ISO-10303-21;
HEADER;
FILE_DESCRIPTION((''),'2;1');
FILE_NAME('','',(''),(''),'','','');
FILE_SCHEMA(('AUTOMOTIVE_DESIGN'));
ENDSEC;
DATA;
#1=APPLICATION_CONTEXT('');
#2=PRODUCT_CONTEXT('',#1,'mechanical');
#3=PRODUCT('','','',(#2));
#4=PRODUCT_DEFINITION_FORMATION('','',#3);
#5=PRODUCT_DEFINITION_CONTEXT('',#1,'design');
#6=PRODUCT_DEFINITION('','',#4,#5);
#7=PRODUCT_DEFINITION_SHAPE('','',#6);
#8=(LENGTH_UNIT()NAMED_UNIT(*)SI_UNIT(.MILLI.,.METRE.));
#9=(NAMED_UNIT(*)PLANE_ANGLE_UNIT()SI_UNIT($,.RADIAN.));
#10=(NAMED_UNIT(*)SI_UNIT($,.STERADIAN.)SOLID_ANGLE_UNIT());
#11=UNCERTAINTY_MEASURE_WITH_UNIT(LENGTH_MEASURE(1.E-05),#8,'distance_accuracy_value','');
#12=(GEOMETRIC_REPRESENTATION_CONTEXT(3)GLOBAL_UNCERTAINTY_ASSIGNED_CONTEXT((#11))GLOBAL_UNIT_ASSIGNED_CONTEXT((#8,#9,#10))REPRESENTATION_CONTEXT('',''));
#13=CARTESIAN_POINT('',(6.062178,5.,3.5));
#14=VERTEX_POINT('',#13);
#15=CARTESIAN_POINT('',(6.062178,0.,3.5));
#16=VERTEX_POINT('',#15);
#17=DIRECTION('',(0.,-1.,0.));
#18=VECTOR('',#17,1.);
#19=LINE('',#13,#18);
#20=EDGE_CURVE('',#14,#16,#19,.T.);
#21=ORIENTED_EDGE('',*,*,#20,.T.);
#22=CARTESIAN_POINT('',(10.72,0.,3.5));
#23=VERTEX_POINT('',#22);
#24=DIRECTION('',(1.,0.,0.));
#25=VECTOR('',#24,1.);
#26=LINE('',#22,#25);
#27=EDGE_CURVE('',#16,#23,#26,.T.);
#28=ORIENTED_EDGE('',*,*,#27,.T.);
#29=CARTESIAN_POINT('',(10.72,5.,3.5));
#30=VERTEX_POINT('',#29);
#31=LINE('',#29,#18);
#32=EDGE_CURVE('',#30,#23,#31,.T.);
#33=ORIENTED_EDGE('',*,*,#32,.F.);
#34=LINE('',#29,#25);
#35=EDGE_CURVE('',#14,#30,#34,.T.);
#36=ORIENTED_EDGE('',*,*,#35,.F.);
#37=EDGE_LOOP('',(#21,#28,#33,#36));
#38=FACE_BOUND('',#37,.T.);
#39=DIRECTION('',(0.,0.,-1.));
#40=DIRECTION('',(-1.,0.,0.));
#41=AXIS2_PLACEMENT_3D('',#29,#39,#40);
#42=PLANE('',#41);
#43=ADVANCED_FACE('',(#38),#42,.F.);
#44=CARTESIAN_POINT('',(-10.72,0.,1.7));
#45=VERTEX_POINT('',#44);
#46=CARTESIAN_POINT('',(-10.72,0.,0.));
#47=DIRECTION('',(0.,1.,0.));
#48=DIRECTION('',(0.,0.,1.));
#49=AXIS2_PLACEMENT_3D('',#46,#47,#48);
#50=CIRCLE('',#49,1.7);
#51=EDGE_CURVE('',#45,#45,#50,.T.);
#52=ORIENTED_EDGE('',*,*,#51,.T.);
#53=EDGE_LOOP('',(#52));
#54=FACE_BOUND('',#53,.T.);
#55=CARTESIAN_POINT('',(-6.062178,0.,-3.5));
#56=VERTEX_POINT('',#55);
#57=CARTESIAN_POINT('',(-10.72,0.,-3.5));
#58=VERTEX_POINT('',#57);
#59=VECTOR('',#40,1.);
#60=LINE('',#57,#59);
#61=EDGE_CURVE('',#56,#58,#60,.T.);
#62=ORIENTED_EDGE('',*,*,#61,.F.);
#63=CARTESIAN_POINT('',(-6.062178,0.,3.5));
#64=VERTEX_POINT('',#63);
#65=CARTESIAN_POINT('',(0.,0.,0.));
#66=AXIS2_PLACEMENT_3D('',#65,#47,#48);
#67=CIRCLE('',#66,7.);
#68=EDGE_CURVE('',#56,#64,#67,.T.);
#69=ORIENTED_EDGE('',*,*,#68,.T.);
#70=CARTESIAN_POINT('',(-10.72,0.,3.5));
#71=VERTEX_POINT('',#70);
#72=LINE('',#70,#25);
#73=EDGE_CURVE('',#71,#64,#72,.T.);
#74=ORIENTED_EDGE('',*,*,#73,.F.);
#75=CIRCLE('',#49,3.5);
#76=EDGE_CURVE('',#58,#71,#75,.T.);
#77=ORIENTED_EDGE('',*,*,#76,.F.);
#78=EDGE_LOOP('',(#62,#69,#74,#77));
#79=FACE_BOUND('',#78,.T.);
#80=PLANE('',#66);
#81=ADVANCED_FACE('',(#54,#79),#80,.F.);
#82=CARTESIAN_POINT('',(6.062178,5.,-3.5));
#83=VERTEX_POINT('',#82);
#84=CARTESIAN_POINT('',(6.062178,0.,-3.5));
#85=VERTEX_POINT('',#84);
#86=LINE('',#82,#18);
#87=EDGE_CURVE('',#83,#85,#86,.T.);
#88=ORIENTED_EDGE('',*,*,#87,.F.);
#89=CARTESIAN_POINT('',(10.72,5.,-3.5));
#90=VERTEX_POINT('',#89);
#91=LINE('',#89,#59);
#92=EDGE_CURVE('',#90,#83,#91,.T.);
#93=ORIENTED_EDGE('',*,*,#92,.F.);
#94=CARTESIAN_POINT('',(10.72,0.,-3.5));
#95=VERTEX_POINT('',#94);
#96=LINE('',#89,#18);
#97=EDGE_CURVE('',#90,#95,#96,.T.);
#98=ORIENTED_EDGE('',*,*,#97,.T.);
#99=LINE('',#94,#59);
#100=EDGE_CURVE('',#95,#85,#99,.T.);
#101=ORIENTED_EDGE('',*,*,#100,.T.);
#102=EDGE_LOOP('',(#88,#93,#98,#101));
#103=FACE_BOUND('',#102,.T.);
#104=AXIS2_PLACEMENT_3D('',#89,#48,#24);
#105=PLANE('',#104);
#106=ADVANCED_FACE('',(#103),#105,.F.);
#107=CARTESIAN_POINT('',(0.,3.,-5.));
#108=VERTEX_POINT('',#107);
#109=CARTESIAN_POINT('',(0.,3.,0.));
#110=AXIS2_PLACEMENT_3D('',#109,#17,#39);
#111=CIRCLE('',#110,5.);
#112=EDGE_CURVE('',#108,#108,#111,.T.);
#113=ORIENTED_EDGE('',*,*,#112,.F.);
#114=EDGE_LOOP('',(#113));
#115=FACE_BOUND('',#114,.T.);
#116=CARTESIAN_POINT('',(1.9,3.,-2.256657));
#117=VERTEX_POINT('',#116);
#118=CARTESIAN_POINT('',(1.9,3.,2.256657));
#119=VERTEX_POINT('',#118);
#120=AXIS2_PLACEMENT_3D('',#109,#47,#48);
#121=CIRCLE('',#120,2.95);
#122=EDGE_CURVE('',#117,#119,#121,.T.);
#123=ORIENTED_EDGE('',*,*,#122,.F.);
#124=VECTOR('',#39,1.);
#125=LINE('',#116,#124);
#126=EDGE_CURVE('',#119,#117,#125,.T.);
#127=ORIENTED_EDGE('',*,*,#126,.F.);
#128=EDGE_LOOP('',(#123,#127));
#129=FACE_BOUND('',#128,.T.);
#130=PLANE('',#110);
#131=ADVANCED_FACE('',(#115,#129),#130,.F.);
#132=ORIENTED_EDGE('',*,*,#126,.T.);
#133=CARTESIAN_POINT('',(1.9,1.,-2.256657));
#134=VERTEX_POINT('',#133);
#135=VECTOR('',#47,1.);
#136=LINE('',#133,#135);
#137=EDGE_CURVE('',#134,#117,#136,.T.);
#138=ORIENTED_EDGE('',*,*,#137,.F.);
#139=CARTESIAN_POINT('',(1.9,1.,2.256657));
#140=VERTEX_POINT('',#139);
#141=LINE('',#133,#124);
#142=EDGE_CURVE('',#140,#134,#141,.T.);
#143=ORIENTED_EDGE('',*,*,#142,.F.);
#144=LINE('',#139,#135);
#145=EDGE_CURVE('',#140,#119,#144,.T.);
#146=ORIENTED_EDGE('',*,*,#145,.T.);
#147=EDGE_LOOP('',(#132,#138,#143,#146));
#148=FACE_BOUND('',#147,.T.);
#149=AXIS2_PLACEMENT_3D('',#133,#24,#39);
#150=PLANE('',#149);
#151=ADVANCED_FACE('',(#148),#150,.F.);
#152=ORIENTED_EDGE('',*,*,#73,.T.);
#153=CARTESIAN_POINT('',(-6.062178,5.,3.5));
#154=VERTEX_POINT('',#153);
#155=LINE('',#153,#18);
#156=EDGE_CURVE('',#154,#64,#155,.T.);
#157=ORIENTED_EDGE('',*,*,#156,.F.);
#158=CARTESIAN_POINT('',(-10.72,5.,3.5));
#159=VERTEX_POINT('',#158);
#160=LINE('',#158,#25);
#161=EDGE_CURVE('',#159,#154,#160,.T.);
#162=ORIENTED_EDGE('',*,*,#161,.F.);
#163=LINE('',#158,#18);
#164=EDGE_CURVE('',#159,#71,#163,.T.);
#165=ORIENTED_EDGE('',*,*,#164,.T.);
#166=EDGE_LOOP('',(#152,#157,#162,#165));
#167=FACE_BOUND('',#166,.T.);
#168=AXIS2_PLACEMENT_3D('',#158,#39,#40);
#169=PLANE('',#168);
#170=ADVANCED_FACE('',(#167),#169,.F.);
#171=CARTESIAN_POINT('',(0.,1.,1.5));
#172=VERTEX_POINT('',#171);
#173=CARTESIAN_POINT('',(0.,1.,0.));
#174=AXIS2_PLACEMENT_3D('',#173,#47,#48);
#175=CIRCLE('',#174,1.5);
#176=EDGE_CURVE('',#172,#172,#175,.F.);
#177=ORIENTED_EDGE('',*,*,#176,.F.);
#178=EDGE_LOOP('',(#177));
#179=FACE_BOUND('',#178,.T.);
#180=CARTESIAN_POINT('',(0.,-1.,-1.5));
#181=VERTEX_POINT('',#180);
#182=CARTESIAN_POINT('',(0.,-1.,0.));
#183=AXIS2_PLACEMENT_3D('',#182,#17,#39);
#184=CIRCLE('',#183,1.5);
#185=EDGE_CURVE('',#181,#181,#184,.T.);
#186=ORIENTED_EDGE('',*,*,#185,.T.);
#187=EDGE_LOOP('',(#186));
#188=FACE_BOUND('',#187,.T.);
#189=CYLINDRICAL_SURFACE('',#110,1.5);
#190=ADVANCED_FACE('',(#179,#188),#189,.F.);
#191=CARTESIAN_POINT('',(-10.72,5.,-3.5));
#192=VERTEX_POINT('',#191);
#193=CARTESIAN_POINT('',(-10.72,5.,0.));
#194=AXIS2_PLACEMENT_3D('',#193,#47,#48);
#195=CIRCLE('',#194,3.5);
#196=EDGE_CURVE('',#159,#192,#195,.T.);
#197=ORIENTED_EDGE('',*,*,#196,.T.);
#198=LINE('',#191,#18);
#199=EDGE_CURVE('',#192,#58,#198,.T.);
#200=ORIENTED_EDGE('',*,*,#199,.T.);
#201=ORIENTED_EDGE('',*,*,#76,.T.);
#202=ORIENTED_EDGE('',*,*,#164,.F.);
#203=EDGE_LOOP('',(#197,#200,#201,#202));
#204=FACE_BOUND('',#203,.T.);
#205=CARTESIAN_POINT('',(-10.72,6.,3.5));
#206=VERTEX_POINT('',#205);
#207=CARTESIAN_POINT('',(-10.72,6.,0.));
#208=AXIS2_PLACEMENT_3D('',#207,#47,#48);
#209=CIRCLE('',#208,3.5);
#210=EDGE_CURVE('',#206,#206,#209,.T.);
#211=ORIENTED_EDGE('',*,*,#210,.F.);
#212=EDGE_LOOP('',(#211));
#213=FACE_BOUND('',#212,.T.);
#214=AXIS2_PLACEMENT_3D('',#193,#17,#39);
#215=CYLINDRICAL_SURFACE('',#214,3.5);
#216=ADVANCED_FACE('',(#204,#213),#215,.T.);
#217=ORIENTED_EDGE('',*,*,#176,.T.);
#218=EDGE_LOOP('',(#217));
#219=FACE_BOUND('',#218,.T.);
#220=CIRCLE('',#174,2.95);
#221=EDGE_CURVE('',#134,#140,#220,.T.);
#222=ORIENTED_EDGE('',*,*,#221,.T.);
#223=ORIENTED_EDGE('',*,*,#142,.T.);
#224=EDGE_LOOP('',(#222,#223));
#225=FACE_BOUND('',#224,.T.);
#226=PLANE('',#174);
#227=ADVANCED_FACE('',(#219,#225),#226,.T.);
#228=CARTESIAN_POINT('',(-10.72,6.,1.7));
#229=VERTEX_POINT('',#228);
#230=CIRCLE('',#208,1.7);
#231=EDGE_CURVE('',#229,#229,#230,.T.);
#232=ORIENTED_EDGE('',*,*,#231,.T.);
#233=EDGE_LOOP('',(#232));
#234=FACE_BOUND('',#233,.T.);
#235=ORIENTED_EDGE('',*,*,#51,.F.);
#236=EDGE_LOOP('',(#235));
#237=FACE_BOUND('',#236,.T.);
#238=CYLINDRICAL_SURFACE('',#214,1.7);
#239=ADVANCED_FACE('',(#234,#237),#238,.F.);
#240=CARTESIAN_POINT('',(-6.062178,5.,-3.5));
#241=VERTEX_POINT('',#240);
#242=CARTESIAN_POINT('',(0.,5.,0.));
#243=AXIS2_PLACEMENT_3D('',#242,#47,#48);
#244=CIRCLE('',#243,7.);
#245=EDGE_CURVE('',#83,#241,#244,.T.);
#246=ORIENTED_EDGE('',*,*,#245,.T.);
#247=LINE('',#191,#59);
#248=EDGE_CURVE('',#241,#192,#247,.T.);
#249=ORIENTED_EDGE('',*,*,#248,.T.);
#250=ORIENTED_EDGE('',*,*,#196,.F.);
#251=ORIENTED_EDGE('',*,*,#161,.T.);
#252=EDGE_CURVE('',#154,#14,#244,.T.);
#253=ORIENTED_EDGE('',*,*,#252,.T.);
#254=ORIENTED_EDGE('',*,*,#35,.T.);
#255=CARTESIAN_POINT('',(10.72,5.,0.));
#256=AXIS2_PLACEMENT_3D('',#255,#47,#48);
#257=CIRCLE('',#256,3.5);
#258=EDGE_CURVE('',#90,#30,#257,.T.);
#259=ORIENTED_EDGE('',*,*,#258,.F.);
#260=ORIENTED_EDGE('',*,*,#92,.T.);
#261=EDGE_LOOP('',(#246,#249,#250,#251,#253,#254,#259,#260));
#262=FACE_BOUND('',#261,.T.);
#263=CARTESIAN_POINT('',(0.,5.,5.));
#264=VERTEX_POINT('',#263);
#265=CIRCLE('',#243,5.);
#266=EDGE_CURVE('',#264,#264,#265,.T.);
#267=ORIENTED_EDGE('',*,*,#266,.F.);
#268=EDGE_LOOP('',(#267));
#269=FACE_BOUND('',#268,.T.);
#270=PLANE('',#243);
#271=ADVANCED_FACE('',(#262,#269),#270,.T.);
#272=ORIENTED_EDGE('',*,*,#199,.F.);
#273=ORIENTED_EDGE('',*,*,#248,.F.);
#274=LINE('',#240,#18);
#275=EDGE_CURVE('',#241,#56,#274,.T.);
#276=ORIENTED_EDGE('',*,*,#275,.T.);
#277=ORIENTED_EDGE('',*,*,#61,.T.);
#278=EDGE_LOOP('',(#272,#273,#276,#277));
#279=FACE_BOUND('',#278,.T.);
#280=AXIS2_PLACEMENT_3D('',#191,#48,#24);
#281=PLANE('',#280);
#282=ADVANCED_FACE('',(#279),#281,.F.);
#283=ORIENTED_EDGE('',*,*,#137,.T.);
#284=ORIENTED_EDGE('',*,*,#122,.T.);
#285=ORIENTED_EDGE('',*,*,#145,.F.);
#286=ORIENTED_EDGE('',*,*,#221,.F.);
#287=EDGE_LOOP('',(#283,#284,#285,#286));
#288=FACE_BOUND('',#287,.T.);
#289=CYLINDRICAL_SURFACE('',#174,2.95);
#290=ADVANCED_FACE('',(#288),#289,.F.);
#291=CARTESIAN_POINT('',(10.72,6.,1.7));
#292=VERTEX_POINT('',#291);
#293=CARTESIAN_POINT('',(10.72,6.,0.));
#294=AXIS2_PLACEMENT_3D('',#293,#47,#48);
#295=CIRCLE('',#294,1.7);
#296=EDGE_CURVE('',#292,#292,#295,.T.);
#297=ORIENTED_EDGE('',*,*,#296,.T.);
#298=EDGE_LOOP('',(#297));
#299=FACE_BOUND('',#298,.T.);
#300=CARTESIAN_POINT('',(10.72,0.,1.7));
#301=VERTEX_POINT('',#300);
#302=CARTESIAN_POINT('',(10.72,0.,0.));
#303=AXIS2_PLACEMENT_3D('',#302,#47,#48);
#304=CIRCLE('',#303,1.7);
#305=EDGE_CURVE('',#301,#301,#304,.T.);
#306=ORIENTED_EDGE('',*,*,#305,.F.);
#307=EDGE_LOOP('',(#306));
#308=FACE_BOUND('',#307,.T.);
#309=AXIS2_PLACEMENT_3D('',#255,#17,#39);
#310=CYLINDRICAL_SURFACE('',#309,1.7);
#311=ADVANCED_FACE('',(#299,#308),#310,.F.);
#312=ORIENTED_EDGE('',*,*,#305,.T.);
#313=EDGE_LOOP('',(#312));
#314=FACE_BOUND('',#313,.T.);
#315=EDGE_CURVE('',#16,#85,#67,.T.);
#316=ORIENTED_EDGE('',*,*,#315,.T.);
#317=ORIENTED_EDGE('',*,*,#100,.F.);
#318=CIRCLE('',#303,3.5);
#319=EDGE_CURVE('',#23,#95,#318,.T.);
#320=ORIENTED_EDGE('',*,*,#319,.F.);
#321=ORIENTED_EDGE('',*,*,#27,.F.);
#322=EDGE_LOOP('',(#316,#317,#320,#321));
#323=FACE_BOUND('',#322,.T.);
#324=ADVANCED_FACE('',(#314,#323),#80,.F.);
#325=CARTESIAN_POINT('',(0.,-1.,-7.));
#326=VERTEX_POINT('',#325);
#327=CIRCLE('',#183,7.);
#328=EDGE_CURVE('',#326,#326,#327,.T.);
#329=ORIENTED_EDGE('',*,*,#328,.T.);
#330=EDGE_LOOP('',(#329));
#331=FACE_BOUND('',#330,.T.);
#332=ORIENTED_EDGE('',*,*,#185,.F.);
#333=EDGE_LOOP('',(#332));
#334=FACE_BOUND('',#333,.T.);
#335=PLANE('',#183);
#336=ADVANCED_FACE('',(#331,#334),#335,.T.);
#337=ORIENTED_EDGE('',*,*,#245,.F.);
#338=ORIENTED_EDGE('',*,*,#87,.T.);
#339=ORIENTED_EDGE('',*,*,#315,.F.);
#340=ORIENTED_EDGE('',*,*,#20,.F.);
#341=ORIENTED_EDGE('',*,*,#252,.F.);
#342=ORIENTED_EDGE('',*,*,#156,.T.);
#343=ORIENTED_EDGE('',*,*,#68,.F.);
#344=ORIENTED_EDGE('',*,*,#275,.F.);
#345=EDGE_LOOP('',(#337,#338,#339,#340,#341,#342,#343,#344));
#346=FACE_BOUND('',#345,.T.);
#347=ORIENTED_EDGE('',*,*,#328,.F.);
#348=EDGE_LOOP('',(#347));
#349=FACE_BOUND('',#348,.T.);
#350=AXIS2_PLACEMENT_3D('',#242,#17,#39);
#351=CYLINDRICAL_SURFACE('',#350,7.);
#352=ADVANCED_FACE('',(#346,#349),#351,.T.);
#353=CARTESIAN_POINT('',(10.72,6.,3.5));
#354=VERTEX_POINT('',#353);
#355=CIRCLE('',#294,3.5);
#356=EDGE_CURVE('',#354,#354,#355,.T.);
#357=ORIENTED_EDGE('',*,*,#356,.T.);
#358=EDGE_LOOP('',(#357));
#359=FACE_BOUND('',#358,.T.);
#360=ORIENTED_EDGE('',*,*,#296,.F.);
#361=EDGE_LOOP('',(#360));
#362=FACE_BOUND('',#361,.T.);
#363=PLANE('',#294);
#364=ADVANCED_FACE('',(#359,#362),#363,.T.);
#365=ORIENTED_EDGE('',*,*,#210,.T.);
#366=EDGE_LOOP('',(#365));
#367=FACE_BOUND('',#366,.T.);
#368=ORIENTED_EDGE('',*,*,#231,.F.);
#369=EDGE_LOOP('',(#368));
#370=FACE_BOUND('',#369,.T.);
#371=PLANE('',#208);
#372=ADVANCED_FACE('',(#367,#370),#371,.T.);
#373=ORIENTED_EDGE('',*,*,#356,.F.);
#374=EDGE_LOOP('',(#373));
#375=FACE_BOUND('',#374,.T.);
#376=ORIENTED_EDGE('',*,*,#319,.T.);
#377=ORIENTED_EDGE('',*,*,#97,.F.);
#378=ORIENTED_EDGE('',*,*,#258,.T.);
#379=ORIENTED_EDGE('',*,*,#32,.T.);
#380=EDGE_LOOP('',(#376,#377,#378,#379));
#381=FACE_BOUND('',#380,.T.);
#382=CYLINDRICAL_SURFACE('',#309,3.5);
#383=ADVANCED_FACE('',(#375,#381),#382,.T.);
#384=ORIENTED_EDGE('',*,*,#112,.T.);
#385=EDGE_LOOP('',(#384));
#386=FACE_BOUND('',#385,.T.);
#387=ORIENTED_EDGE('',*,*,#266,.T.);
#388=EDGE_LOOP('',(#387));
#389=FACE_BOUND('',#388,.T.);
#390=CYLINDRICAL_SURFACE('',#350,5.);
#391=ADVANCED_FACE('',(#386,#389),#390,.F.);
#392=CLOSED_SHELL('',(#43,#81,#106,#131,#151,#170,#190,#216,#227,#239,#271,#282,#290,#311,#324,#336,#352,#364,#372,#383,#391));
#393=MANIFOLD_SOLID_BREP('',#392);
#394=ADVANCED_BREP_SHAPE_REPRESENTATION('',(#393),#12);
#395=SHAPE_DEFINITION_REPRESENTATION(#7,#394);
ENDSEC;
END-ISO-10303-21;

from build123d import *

# Parameters (mm, degrees)
ESQUISSE1_R             = 5
ESQUISSE1_R_2           = 1.7
BOSS_EXTRU_1_DEPTH      = 5
ESQUISSE2_R             = 3.5
ESQUISSE2_R_2           = 1.7
BOSS_EXTRU_2_DEPTH      = 1
BOSS_EXTRU_3_DEPTH      = 1
BOSS_EXTRU_3_DEPTH_BACK = 3
ESQUISSE3_R             = 7
ESQUISSE3_R_2           = 1.5
ENL_V_MAT_EXTRU_1_DEPTH = 2


with BuildPart() as part:
    # Esquisse1 → Boss.-Extru.1 (new body)
    with BuildSketch(Plane(origin=(0, 0, 0), x_dir=(1, 0, 0), z_dir=(0, 1, 0))):
        with BuildLine():
            Line((-10.72, 3.5), (-6.062177826, 3.5))
            ThreePointArc((-6.062177826, 3.5), (0, 7), (6.062177826, 3.5))
            Line((6.062177826, 3.5), (10.72, 3.5))
            ThreePointArc((10.72, 3.5), (14.22, 0), (10.72, -3.5))
            Line((10.72, -3.5), (6.062177826, -3.5))
            ThreePointArc((6.062177826, -3.5), (0, -7), (-6.062177826, -3.5))
            Line((-6.062177826, -3.5), (-10.72, -3.5))
            ThreePointArc((-10.72, -3.5), (-14.22, 0), (-10.72, 3.5))
        make_face()
        Circle(ESQUISSE1_R, mode=Mode.SUBTRACT)
        with Locations((10.72, 0)):
            Circle(ESQUISSE1_R_2, mode=Mode.SUBTRACT)
        with Locations((-10.72, 0)):
            Circle(ESQUISSE1_R_2, mode=Mode.SUBTRACT)
    extrude(amount=BOSS_EXTRU_1_DEPTH)

    # Esquisse2 → Boss.-Extru.2 (add)
    # profile 1 of 2: a face of its own
    with BuildSketch(Plane(origin=(0, 5, 0), x_dir=(1, 0, 0), z_dir=(0, 1, 0))):
        with Locations((-10.72, 0)):
            Circle(ESQUISSE2_R)
        with Locations((-10.72, 0)):
            Circle(ESQUISSE2_R_2, mode=Mode.SUBTRACT)
    # profile 2 of 2: a face of its own
    with BuildSketch(Plane(origin=(0, 5, 0), x_dir=(1, 0, 0), z_dir=(0, 1, 0))):
        with Locations((10.72, 0)):
            Circle(ESQUISSE2_R)
        with Locations((10.72, 0)):
            Circle(ESQUISSE2_R_2, mode=Mode.SUBTRACT)
    extrude(amount=BOSS_EXTRU_2_DEPTH)

    # Esquisse3 → Boss.-Extru.3 (add, two sides: drawn at the far end of the back side and taken through both)
    with BuildSketch(Plane.XZ.offset(-BOSS_EXTRU_3_DEPTH_BACK)):
        Circle(ESQUISSE3_R)
        Circle(ESQUISSE3_R_2, mode=Mode.SUBTRACT)
    extrude(amount=BOSS_EXTRU_3_DEPTH + BOSS_EXTRU_3_DEPTH_BACK)

    # Esquisse6 → Enlèv. mat.-Extru.1 (cut)
    with BuildSketch(Plane(origin=(0, 3, 0), x_dir=(1, 0, 0), z_dir=(0, 1, 0))):
        with BuildLine():
            Line((1.9, 2.256656819), (1.9, -2.256656819))
            ThreePointArc((1.9, -2.256656819), (-2.95, 0), (1.9, 2.256656819))
        make_face()
    extrude(amount=-ENL_V_MAT_EXTRU_1_DEPTH, mode=Mode.SUBTRACT)


solid = part.part
